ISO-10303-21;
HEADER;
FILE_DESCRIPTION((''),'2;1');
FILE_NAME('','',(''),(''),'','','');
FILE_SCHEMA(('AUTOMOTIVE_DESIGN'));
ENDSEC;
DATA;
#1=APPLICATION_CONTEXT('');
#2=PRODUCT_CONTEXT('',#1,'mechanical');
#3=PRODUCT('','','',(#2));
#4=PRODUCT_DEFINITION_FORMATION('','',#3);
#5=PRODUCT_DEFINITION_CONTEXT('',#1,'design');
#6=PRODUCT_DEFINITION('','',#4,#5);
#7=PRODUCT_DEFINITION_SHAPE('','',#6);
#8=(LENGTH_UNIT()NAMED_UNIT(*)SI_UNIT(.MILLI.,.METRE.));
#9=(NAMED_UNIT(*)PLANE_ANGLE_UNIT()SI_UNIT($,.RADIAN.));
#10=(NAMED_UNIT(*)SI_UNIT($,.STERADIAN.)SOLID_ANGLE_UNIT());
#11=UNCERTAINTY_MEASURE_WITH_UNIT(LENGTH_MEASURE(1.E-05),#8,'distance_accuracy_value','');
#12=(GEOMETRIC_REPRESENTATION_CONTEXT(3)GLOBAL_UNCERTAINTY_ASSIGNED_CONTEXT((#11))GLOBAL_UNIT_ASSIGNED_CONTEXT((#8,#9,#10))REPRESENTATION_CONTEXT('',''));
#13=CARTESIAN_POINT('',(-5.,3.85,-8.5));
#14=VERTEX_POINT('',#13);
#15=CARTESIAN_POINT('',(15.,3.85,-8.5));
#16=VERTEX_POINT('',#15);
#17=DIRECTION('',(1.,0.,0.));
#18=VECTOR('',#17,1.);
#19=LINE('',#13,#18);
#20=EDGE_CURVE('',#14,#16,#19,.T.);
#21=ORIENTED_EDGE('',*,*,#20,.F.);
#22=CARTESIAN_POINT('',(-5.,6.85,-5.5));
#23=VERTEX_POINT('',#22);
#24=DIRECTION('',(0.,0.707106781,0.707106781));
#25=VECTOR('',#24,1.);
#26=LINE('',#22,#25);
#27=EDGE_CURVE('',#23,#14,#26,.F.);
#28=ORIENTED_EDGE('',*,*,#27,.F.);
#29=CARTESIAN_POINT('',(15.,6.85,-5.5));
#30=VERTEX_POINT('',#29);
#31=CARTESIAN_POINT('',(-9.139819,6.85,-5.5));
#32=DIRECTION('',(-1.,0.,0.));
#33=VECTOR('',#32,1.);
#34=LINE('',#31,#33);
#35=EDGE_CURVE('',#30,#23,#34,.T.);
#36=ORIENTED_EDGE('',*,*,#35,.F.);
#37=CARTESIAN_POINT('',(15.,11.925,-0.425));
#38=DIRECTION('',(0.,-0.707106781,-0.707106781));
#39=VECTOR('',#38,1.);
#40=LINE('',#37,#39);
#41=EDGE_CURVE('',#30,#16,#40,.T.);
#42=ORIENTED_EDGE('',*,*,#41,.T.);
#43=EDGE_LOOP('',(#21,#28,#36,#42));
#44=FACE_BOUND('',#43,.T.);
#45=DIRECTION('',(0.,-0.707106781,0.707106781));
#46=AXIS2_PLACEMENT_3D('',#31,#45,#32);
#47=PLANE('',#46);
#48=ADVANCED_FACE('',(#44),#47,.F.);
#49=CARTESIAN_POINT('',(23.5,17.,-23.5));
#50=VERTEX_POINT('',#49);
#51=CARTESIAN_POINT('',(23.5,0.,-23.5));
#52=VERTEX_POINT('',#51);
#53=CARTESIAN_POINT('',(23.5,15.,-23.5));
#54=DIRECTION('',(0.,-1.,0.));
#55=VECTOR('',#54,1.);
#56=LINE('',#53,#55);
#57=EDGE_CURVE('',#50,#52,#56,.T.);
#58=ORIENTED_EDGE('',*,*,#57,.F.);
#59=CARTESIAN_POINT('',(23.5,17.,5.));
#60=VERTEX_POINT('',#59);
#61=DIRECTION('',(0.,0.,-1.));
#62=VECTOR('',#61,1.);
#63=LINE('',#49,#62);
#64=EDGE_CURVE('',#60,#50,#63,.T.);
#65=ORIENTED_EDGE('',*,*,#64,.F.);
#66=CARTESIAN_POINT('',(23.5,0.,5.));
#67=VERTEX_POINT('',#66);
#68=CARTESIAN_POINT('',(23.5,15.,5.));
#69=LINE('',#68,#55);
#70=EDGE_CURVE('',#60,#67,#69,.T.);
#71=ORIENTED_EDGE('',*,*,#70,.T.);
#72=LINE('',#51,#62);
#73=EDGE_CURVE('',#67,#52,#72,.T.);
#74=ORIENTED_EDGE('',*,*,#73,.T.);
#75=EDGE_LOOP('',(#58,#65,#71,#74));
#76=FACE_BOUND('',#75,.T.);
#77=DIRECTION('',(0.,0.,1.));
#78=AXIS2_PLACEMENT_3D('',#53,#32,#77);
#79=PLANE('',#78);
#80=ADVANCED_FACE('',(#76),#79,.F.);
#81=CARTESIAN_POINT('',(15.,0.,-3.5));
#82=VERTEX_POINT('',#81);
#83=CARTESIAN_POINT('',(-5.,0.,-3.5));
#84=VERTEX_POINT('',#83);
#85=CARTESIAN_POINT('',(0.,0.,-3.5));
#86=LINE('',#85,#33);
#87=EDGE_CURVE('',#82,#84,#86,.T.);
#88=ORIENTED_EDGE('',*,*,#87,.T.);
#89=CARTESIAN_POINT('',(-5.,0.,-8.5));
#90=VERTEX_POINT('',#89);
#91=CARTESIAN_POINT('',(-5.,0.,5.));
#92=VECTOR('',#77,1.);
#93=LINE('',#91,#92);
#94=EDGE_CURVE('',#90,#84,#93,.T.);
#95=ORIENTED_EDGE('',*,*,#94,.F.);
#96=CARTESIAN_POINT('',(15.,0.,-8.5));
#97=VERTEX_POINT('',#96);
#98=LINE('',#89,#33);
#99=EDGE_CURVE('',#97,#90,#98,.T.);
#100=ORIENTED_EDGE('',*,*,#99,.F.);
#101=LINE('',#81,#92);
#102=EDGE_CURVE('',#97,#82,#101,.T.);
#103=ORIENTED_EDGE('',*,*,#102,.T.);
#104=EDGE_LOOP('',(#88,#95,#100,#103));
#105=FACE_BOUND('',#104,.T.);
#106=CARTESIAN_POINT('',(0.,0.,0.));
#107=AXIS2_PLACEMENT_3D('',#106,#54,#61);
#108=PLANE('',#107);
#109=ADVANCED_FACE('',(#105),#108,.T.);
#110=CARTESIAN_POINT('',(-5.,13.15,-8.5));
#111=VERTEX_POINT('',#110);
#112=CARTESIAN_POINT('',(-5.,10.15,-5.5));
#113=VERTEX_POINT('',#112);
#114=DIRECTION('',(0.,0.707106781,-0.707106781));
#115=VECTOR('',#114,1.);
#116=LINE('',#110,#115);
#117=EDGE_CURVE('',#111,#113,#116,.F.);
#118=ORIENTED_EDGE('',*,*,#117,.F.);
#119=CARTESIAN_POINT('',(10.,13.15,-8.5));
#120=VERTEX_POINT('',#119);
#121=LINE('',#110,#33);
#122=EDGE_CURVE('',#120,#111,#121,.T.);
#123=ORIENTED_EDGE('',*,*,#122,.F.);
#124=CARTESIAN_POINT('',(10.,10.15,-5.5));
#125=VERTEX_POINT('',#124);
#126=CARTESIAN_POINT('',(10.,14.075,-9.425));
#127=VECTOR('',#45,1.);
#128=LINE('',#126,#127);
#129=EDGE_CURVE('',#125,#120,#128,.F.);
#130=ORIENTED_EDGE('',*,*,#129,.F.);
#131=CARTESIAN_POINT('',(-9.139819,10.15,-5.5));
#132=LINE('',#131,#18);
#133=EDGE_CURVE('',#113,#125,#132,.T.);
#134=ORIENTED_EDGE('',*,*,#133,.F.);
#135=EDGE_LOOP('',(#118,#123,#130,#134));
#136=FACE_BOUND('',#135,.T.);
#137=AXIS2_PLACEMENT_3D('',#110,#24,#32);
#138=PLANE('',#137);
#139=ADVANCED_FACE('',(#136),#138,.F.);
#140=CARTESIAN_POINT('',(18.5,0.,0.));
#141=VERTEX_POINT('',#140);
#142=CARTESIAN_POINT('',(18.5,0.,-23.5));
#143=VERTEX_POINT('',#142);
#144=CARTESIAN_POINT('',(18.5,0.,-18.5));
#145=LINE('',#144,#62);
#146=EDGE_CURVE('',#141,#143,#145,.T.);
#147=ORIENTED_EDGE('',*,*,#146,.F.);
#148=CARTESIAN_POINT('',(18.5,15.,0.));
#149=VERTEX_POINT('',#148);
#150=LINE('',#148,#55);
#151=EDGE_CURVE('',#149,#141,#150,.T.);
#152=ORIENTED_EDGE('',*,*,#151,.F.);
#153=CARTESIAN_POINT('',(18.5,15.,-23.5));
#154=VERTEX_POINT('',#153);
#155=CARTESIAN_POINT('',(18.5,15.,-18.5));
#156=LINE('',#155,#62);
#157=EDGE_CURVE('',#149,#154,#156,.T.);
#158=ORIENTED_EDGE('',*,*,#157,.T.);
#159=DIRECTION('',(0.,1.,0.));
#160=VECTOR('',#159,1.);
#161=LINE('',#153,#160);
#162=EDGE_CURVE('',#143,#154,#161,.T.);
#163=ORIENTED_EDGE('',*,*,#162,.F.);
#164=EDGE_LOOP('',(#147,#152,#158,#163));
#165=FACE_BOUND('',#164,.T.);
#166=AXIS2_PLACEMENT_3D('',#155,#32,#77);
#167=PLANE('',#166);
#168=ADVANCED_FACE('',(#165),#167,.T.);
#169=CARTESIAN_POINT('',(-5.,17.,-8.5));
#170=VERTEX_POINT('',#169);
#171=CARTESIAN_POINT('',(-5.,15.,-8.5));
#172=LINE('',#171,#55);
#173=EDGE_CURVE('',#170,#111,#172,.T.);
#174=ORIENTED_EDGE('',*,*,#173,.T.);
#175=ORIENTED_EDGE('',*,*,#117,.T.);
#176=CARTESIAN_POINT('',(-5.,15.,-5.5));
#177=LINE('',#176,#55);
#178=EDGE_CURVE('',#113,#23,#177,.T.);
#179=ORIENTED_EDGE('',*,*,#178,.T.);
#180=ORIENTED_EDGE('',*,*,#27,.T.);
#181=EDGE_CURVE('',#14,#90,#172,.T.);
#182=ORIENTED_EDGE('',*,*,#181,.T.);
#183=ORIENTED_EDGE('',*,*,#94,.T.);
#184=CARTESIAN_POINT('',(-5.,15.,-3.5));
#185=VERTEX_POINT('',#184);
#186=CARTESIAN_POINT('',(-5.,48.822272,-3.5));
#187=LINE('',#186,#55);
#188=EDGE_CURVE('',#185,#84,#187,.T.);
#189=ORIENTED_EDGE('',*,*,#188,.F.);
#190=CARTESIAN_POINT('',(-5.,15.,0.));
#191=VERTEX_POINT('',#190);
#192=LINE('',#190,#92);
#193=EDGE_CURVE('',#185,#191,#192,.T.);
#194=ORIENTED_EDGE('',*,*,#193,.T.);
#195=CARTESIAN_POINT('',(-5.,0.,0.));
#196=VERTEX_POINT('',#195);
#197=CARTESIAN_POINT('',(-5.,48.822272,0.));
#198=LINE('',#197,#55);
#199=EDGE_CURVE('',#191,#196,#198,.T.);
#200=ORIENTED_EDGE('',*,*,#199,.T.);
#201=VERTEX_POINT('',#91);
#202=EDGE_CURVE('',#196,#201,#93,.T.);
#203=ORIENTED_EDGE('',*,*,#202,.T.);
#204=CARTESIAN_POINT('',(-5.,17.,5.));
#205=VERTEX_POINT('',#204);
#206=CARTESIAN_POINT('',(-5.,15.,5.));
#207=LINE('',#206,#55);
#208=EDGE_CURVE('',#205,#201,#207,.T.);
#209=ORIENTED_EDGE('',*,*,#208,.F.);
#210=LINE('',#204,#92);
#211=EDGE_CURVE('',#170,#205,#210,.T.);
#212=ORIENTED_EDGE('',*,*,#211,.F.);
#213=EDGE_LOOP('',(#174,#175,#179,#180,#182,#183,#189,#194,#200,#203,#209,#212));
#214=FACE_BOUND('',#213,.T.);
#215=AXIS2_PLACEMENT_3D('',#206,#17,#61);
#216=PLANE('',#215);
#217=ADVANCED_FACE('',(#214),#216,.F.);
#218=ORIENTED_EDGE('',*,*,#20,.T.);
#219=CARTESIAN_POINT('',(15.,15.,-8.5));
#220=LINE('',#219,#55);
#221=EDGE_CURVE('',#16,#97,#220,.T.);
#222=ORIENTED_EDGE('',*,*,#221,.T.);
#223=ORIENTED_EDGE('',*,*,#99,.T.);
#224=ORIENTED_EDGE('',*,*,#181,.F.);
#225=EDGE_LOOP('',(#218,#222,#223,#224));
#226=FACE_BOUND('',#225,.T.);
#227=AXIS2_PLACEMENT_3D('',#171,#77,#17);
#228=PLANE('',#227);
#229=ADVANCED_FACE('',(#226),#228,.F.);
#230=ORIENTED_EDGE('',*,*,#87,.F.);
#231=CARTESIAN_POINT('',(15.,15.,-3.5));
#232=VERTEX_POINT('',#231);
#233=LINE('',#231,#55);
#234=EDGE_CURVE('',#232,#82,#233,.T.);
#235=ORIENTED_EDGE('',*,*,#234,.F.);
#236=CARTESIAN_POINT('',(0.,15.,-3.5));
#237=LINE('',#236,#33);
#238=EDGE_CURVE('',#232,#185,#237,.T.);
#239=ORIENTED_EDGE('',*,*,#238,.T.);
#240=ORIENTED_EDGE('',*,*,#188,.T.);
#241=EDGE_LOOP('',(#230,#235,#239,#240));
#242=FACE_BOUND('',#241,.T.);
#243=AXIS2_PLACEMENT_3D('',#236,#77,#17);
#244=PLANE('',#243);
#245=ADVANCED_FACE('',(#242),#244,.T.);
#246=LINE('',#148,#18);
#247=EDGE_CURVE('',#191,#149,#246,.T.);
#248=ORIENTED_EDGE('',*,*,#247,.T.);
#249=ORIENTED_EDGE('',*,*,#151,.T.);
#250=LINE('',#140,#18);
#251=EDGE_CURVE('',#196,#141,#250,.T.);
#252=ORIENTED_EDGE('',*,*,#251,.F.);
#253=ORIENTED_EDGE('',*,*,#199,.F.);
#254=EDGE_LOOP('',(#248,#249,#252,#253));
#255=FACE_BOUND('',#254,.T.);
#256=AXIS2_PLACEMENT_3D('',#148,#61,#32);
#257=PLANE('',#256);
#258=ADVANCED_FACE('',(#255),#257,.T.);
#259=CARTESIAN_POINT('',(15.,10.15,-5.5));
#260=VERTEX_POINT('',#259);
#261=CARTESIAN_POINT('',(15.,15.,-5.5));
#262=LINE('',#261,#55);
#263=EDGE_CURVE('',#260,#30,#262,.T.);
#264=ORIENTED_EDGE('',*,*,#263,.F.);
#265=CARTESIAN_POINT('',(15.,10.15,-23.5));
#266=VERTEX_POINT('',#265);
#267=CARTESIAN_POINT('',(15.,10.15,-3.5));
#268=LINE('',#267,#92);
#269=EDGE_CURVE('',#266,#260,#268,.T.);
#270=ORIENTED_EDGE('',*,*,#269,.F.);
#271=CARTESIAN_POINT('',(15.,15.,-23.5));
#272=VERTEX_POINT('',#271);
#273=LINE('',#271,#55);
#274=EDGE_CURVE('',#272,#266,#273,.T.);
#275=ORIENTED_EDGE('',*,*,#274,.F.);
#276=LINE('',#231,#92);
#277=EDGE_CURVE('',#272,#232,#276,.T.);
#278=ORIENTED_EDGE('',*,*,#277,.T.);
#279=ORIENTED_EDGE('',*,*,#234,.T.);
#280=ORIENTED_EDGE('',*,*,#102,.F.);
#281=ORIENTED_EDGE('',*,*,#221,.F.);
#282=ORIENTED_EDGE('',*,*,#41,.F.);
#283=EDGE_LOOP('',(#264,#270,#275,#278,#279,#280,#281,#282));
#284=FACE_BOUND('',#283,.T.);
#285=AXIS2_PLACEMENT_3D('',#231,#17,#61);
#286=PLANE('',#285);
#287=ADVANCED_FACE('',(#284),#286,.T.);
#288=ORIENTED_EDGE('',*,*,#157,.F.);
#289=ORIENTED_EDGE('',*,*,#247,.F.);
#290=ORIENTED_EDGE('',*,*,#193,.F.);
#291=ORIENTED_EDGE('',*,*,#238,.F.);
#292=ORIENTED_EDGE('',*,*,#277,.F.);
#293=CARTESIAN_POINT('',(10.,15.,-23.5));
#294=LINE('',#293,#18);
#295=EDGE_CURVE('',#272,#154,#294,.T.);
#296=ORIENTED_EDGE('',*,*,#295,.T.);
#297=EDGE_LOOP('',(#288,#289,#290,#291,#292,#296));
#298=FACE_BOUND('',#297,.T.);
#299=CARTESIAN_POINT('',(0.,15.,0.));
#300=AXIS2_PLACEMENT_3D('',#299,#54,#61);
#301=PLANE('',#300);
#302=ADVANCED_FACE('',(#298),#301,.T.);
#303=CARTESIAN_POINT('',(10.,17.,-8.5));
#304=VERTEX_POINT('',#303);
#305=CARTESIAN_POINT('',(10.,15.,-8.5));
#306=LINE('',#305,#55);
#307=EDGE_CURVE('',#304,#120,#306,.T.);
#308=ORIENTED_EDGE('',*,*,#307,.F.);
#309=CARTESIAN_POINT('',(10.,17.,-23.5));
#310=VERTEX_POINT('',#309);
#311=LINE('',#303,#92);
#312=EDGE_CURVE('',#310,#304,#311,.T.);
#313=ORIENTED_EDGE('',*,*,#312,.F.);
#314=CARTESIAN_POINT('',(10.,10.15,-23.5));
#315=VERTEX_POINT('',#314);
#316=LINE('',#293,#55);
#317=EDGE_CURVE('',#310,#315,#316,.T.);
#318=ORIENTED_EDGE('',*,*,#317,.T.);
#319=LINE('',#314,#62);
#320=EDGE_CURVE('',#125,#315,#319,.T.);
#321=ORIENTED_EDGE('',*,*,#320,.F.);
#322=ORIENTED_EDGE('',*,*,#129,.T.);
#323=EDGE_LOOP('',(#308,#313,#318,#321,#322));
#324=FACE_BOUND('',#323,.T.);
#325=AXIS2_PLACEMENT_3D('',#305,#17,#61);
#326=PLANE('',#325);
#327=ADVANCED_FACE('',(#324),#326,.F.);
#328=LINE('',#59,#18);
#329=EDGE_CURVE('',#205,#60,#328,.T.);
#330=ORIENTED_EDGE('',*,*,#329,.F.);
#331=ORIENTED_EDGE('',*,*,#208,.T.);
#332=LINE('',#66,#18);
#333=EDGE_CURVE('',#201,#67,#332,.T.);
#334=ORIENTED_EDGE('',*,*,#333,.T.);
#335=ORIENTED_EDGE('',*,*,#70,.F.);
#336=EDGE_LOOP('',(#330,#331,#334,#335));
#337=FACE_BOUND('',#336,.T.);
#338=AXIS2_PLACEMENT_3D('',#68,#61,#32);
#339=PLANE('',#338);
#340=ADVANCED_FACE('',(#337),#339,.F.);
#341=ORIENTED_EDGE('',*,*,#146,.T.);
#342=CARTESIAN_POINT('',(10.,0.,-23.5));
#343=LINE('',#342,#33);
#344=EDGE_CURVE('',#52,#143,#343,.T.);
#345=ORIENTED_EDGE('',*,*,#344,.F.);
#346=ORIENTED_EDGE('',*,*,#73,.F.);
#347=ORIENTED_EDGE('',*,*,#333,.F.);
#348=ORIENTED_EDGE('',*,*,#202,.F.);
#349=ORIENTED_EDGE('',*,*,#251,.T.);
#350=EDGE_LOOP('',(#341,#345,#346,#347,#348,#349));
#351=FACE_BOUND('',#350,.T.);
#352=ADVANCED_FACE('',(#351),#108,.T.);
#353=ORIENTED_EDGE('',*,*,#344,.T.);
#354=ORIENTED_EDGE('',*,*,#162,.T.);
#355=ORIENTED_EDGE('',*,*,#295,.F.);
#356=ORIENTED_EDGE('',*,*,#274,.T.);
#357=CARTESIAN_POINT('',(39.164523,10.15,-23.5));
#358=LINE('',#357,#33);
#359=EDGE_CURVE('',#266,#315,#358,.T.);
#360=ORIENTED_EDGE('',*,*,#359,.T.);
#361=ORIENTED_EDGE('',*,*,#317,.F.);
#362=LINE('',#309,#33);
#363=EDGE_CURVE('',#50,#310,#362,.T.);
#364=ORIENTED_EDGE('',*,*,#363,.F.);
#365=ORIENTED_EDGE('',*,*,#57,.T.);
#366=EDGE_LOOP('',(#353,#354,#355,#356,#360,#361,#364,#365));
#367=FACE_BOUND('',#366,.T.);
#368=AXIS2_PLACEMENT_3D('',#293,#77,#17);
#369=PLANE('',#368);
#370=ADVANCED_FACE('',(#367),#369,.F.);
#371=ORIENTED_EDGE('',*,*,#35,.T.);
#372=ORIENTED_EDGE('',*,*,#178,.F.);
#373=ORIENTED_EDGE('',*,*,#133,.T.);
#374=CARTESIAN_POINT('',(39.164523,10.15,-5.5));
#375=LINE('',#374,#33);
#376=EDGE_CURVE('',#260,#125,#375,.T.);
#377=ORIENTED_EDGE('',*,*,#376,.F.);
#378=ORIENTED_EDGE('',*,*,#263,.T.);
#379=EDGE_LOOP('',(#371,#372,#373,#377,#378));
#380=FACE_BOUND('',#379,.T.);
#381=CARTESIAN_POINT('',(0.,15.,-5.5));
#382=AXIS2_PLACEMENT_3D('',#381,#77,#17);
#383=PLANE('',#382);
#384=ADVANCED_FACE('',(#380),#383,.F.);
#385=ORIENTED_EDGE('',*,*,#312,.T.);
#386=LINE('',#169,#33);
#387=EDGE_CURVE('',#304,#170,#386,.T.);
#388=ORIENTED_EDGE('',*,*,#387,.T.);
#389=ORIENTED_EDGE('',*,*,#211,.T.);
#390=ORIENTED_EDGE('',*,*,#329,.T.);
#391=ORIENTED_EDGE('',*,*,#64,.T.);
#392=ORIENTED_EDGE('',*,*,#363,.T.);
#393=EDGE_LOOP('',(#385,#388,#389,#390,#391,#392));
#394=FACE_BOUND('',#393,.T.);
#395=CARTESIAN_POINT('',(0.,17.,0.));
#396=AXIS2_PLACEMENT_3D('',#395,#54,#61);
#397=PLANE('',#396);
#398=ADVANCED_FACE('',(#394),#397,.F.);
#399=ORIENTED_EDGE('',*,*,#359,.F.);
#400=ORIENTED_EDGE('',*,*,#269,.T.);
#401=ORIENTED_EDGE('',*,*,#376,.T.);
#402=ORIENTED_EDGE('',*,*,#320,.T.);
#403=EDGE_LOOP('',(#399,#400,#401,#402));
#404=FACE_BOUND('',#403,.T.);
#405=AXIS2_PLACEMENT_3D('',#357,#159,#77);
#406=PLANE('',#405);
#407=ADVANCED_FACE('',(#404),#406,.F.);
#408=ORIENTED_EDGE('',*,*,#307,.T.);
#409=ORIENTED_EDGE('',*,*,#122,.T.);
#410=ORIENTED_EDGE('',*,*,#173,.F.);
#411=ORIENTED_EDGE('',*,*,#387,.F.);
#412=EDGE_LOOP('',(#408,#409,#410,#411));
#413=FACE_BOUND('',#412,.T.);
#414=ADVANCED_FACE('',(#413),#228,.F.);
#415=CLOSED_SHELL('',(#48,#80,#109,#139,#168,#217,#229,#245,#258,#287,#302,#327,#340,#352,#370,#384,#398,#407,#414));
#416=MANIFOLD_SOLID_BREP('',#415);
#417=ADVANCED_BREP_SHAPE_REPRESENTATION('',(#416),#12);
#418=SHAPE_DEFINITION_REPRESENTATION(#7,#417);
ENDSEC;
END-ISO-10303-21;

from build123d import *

# Parameters (mm, degrees)
BOSS_EXTRUDE1_DEPTH = 15
SKETCH2_W           = 19.139819484
SKETCH2_H           = 3.3
CUT_EXTRUDE1_DEPTH  = 3
CHAMFER1_SIZE       = 3
BOSS_EXTRUDE2_DEPTH = 2
CUT_EXTRUDE2_DEPTH  = 15
CUT_EXTRUDE3_DEPTH  = 8.5


with BuildPart() as part:
    # Sketch1 → Boss-Extrude1 (new body)
    with BuildSketch(Plane(origin=(0, 0, 0), x_dir=(1, 0, 0), z_dir=(0, 1, 0))):
        Polygon((-5, 8.5), (10, 8.5), (10, 23.5), (23.5, 23.5), (23.5, -5), (-5, -5), align=None)
        Polygon((0, 0), (0, 3.5), (15, 3.5), (15, 18.5), (18.5, 18.5), (18.5, 0), align=None, mode=Mode.SUBTRACT)
    extrude(amount=BOSS_EXTRUDE1_DEPTH)

    # Sketch2 → Cut-Extrude1 (cut)
    with BuildSketch(Plane(origin=(0, 0, -8.5), x_dir=(-1, 0, 0), z_dir=(0, 0, -1))):
        with Locations((-0.430090258, 8.5)):
            Rectangle(SKETCH2_W, SKETCH2_H)
    extrude(amount=-CUT_EXTRUDE1_DEPTH, mode=Mode.SUBTRACT)

    # Chamfer1
    chamfer1_edges = [part.edges().sort_by_distance(p)[0] for p in [
        (2.5, 6.85, -8.5),
        (2.5, 10.15, -8.5),
    ]]
    chamfer(chamfer1_edges, length=CHAMFER1_SIZE - 0.0001)  # a hair under: the kernel refuses the full size

    # Sketch4 → Boss-Extrude2 (add)
    with BuildSketch(Plane(origin=(0, 15, 0), x_dir=(1, 0, 0), z_dir=(0, 1, 0))):
        Polygon((-5, 8.5), (10, 8.5), (10, 23.5), (23.5, 23.5), (23.5, -5), (-5, -5), align=None)
    extrude(amount=BOSS_EXTRUDE2_DEPTH)

    # Sketch5 → Cut-Extrude2 (cut)
    with BuildSketch(Plane.XZ):
        Polygon((0, 0), (-5, 0), (-5, -3.5), (15, -3.5), (15, -24.324803995), (18.5, -24.324803995), (18.5, 0), align=None)
    extrude(amount=-CUT_EXTRUDE2_DEPTH, mode=Mode.SUBTRACT)

    # Sketch6 → Cut-Extrude3 (cut)
    with BuildSketch(Plane.ZY.offset(-10)):
        Polygon((-5.5, 10.15), (-5.5, 6.85), (-8.5, 3.85), (-8.5, 0), (-23.5, 0), (-23.5, 10.15), align=None)
    extrude(amount=-CUT_EXTRUDE3_DEPTH, mode=Mode.SUBTRACT)


solid = part.part
